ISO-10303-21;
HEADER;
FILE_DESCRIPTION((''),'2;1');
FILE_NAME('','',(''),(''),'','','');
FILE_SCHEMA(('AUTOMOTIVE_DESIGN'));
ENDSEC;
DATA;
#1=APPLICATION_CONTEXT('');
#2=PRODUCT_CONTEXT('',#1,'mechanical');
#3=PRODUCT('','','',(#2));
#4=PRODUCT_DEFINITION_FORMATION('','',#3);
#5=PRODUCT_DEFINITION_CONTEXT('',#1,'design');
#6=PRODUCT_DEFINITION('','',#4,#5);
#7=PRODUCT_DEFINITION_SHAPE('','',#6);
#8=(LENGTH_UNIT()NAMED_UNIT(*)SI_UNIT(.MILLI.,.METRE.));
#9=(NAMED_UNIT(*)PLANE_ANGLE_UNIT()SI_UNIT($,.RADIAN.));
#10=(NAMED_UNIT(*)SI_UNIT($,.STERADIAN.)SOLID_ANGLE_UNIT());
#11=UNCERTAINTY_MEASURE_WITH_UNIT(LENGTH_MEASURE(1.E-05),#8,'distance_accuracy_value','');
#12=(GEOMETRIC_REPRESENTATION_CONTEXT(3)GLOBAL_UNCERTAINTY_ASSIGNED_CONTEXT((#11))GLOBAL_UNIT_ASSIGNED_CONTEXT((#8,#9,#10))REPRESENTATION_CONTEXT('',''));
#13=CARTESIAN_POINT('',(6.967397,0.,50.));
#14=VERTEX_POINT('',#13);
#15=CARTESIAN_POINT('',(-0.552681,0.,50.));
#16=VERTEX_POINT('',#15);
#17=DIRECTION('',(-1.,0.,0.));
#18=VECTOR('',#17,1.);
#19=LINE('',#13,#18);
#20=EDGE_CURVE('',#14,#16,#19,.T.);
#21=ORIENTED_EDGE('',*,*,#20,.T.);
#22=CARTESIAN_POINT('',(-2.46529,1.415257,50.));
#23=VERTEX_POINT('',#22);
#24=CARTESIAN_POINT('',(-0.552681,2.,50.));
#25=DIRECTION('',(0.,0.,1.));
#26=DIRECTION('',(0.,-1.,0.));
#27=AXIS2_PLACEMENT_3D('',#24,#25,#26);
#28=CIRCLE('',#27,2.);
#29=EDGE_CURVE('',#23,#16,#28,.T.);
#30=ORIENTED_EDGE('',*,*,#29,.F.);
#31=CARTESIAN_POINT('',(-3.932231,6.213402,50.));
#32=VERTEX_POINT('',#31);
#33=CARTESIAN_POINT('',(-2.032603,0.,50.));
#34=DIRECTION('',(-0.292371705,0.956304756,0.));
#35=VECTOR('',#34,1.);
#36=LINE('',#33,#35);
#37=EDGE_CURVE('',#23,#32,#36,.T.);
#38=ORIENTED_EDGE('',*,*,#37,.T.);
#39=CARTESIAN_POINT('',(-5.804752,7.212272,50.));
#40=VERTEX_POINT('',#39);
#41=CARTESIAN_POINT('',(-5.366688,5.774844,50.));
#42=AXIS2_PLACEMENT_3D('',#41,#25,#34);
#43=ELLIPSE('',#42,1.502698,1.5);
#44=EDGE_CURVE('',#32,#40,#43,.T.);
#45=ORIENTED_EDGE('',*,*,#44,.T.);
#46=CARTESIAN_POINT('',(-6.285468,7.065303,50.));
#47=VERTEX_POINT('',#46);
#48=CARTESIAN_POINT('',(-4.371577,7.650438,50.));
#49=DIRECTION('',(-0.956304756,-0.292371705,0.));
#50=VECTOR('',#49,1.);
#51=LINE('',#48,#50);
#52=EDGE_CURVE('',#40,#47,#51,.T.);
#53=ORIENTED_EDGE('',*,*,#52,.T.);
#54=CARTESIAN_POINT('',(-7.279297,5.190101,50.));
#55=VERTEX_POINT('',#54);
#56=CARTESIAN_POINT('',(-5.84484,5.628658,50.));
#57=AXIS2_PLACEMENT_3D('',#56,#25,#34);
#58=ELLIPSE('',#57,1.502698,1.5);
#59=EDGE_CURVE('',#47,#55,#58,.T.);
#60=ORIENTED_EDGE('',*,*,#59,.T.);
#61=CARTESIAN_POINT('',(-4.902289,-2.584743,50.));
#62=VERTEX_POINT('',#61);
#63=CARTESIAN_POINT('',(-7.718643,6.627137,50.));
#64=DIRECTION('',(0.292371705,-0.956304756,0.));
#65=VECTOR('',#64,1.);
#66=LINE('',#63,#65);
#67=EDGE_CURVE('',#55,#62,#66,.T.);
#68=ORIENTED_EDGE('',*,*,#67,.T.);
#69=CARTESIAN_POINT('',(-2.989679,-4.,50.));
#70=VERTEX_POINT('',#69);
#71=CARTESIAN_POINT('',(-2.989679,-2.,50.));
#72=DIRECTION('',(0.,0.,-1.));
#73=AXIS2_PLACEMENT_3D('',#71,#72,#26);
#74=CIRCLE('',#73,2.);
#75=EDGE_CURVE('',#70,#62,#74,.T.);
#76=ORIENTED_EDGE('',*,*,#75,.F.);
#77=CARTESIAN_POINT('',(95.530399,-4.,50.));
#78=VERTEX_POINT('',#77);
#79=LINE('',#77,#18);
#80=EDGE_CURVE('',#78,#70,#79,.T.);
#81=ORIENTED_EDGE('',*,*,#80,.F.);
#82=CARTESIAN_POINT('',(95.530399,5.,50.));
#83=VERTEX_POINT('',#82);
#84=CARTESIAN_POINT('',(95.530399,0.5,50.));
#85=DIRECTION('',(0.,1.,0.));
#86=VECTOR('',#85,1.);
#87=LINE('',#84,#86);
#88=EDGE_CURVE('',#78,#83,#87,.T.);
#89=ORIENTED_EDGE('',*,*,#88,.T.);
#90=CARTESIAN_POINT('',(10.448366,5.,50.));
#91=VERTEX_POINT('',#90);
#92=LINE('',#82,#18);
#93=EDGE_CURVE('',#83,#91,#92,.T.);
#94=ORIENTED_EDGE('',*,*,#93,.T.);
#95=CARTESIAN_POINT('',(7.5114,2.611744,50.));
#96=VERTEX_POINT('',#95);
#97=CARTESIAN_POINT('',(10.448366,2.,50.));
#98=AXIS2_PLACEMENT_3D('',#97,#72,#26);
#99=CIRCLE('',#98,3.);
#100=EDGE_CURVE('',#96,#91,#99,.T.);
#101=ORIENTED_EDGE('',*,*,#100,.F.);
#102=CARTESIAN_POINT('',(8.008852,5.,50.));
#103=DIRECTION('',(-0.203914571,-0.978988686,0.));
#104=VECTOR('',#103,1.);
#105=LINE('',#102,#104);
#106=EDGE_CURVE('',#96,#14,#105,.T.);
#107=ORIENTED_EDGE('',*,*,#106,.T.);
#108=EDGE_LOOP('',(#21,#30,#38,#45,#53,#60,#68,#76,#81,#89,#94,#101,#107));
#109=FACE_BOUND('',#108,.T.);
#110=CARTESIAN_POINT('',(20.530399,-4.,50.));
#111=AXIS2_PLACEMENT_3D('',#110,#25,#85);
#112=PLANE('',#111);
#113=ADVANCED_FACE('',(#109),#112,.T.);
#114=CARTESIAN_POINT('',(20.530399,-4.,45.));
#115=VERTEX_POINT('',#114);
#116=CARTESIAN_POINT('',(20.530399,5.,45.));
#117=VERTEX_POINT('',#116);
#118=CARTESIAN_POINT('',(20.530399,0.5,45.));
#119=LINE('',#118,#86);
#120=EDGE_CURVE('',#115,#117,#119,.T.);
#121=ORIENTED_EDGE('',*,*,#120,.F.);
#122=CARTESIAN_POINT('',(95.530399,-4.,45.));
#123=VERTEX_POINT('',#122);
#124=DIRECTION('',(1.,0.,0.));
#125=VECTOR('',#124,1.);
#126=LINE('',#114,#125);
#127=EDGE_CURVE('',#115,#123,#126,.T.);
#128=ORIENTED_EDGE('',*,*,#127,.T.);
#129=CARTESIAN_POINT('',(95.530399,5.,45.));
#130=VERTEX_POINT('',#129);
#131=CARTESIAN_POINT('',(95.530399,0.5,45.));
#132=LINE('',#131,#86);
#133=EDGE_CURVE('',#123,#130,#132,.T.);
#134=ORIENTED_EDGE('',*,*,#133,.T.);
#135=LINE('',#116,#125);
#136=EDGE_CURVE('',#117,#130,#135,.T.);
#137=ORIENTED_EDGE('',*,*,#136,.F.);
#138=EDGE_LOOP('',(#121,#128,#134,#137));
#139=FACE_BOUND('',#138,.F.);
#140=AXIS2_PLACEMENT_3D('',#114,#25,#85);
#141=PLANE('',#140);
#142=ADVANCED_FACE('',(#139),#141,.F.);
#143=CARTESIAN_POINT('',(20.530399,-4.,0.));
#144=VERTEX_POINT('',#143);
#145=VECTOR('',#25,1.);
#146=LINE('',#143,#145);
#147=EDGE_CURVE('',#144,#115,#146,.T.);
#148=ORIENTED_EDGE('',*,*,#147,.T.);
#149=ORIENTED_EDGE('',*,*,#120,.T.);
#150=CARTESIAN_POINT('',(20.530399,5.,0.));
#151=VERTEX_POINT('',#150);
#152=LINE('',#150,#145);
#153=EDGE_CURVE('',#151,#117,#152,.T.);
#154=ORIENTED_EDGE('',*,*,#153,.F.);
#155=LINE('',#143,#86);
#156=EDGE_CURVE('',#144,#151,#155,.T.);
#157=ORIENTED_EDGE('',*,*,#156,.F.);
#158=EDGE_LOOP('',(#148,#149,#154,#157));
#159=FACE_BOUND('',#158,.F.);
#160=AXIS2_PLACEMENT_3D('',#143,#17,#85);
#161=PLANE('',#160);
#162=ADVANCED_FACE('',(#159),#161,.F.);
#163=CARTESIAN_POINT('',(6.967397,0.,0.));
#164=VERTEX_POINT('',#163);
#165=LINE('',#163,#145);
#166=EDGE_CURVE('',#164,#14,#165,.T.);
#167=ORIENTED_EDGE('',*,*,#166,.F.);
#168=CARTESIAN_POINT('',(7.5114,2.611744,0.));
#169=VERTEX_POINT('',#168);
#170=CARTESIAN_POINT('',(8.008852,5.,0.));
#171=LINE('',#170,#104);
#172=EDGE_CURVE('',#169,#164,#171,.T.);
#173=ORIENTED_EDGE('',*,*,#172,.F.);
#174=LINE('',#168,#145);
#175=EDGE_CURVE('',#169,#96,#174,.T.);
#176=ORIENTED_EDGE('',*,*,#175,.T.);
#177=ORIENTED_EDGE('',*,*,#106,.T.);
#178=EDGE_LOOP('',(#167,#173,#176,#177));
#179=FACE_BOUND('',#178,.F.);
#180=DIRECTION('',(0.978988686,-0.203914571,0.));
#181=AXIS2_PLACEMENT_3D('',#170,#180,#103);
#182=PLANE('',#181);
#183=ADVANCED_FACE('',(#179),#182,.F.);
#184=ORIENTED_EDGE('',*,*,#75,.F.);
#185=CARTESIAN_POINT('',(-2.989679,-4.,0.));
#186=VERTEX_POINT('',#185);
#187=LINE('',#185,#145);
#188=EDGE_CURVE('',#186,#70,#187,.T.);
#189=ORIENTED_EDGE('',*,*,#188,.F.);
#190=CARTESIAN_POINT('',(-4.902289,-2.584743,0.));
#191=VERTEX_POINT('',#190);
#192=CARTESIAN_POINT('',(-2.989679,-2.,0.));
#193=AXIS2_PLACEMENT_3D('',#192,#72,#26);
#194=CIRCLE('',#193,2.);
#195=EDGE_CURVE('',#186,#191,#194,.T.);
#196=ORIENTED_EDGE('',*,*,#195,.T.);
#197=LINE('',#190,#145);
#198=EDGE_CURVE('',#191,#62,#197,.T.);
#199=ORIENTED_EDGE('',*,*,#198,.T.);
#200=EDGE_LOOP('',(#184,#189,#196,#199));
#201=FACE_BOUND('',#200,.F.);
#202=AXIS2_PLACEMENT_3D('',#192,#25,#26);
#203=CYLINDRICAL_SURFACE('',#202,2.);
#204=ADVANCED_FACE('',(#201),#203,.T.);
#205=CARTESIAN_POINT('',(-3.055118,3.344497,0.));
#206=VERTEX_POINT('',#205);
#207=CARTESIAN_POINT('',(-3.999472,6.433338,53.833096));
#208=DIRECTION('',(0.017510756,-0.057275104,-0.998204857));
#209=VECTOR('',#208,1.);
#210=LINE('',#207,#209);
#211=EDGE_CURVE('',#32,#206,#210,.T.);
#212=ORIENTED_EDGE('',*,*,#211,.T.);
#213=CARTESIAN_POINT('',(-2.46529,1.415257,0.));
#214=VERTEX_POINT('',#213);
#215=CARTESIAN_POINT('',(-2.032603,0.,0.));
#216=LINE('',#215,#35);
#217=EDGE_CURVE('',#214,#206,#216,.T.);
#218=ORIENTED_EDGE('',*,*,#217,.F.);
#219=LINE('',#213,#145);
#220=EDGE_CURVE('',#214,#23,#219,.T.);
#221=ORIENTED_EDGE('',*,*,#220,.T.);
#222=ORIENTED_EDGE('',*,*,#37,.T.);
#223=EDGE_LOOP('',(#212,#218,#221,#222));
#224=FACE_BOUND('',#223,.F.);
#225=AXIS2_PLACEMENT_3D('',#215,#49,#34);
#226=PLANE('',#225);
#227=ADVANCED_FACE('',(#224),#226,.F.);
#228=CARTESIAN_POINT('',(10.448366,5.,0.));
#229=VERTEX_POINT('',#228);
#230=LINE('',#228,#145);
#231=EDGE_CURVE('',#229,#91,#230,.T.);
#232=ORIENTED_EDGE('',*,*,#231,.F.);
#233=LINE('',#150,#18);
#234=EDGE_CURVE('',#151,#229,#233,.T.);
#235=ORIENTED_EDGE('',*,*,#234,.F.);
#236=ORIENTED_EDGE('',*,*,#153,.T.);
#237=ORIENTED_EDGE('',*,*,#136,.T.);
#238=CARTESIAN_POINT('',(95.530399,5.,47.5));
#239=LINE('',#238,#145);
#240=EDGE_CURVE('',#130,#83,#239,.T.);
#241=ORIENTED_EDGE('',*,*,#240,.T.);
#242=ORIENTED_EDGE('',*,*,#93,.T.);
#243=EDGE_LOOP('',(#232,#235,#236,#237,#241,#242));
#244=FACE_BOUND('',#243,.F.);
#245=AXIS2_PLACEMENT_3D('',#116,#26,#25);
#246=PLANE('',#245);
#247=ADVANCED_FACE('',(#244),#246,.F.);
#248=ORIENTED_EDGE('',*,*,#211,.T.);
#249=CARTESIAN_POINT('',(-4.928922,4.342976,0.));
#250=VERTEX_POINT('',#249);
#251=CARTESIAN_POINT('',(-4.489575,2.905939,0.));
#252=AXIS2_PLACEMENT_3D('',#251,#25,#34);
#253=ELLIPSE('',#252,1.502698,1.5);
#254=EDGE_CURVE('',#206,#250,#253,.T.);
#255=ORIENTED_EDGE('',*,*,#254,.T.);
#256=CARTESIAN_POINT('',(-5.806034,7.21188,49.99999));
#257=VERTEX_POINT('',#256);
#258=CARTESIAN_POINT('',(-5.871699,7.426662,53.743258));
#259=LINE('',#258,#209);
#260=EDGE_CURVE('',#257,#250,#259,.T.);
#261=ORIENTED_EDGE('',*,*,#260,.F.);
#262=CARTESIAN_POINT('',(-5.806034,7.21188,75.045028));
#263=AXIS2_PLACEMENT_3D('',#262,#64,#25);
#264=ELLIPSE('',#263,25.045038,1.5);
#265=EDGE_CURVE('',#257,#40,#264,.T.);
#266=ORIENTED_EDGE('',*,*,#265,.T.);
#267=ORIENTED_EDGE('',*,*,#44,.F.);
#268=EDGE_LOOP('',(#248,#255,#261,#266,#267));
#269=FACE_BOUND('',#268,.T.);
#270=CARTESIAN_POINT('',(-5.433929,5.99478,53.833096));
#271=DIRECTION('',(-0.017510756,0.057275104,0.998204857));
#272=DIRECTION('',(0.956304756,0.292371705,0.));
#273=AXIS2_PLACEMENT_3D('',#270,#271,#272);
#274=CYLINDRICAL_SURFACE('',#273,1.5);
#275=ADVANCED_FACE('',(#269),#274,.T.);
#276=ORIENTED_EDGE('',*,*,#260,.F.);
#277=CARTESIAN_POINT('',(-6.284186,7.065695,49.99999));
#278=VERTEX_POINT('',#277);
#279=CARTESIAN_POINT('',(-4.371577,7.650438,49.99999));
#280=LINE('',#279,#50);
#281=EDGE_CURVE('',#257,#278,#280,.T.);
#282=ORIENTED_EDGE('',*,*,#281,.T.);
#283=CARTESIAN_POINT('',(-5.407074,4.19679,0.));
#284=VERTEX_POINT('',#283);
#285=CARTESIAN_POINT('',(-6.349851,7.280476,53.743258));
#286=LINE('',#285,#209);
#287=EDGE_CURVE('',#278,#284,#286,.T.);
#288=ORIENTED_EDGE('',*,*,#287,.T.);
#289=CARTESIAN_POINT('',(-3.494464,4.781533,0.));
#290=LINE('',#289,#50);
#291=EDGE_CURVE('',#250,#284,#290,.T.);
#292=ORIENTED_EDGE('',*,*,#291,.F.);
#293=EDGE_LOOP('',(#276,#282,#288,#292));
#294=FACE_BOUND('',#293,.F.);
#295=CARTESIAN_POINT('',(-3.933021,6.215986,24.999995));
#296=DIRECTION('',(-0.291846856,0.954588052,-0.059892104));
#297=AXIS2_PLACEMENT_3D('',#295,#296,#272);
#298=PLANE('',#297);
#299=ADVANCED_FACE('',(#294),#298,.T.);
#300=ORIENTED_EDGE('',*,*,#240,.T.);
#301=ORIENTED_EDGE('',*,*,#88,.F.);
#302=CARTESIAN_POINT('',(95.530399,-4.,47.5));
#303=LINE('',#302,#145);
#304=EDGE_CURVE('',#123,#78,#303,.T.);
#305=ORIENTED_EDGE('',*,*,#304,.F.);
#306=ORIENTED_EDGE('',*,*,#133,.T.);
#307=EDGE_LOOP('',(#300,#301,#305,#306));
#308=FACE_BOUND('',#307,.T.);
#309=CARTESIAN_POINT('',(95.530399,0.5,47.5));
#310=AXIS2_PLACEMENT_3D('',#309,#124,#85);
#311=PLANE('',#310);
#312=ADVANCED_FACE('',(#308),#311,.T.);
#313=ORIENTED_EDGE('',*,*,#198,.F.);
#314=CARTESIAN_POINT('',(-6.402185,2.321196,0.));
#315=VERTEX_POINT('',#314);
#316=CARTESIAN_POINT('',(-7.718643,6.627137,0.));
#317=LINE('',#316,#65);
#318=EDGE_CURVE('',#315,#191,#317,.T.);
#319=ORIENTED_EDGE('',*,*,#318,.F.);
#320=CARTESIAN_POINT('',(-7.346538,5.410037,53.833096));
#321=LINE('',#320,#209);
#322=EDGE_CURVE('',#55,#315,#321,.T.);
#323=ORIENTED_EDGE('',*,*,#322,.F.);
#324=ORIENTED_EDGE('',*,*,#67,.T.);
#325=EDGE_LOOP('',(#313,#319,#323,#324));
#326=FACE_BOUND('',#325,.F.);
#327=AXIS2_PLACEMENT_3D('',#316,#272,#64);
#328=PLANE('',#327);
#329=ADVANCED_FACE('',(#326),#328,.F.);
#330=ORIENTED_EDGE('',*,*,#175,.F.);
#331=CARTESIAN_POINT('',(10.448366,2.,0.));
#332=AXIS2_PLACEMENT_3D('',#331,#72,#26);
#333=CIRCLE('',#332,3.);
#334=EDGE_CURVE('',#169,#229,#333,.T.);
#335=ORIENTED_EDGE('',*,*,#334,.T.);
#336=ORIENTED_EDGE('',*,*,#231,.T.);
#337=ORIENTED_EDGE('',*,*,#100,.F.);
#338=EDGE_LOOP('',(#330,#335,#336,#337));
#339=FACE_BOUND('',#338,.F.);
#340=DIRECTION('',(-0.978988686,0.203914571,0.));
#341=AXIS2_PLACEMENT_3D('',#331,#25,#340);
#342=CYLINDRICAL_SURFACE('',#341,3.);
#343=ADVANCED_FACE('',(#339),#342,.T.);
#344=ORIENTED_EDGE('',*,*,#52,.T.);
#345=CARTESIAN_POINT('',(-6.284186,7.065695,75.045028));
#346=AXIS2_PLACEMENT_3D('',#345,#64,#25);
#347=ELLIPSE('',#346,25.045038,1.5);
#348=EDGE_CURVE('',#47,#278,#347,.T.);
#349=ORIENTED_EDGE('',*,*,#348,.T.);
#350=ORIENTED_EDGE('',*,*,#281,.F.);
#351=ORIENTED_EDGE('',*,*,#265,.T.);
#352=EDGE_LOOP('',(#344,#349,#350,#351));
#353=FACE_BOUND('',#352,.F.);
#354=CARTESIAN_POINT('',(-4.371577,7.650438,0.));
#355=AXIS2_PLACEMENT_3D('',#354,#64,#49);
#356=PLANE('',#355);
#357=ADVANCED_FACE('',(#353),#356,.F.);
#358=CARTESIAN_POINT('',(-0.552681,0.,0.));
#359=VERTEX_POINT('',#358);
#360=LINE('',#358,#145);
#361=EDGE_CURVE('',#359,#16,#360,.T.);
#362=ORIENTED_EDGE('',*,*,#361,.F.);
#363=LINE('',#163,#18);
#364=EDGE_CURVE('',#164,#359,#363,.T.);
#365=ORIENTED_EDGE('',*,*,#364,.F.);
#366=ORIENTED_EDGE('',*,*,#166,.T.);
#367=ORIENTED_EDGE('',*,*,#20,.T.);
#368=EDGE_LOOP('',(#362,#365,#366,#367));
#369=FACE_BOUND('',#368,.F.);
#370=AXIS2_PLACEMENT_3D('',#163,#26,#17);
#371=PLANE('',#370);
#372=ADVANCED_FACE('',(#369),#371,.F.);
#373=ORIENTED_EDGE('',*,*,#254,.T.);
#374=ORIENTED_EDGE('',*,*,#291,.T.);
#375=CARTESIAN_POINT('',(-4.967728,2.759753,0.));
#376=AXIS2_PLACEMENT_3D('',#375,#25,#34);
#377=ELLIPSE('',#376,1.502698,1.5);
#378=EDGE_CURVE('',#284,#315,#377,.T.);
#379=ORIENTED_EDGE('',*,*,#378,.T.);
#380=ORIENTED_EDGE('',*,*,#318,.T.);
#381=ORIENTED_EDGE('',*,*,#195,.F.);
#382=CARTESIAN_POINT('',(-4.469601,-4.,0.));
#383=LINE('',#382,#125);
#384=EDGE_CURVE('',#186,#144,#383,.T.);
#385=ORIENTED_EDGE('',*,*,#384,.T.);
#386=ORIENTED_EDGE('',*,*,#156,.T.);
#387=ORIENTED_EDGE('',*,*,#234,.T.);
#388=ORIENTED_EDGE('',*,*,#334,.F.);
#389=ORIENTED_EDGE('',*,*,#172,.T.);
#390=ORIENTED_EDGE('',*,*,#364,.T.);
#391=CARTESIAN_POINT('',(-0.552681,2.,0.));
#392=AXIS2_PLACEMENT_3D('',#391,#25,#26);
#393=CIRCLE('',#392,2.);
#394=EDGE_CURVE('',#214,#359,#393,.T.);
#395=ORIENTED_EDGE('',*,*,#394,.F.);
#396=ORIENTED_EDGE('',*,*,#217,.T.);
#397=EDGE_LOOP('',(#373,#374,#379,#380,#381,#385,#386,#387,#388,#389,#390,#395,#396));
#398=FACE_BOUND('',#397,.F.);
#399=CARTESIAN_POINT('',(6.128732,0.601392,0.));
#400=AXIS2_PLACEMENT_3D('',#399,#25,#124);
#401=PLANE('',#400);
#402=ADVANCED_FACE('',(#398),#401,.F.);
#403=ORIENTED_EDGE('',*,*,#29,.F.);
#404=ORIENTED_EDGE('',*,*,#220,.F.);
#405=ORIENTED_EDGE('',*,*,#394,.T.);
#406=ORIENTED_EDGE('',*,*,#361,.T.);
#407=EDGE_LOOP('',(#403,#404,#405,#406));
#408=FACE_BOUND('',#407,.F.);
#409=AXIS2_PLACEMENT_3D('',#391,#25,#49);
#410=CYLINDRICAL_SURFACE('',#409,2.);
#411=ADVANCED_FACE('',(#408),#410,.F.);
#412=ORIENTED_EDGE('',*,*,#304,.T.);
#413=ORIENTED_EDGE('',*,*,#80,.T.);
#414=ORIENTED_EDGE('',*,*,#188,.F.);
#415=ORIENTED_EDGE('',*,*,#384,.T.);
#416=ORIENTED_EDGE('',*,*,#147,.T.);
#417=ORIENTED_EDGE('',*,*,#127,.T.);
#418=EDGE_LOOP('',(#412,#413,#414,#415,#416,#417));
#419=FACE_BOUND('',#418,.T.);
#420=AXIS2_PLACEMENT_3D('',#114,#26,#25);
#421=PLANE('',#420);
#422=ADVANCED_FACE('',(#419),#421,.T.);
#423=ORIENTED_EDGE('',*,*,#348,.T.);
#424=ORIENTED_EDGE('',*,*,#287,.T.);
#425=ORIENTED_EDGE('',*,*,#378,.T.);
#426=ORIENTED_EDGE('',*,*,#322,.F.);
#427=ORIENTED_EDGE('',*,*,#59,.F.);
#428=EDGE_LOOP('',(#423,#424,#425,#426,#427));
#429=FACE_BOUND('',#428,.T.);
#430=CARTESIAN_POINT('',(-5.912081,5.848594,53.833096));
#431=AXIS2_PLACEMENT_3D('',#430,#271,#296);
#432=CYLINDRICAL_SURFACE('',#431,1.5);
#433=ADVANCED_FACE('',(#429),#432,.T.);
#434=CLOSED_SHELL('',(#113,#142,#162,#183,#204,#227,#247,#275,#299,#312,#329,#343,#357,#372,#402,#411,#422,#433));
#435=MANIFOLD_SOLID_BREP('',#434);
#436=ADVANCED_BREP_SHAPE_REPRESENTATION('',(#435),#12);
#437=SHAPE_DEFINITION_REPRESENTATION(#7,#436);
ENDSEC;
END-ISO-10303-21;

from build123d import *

# Parameters (mm, degrees)
F1_DEPTH    = 50
F2_SIZE2    = 2.99999
F2_SIZE     = 49.99999
F3_T1_DEPTH = 57.5899085645
F4_R        = 2
F5_R        = 3
F6_W        = 9
F6_H        = 5
F7_DEPTH    = 75
F8_R        = 2


# Not quite as in the source:
# - a fillet or chamfer that OpenCascade refuses, or shapes differently, is made with other operations: its cross-section is extruded or revolved along the edge and cut away or added
# - a fillet or chamfer is up to 0.001 mm smaller than in the source, because OpenCascade refuses the exact size


with BuildPart() as f1:
    # F0 (on Top) → F1 (new body)
    with BuildSketch(Plane.XY):
        Polygon((-4.3715766435, 7.6504380477), (-7.7186432894, 6.6271370812), (-4.4696014276, -4), (20.5303985724, -4), (20.5303985724, 5), (8.0088521886, 5), (6.9673969943, 0), (-2.0326030057, 0), align=None)
    extrude(amount=F1_DEPTH)

    # F2 (size 50 and 3 in the source; OpenCascade refuses exactly that, so slightly less here)
    f2_edges = [f1.edges().sort_by_distance(p)[0] for p in [
        (-6.04511, 7.138788, 0),
    ]]
    f2_side = f1.faces().sort_by_distance((-6.04511, 7.138788, 25))[0]
    chamfer(f2_edges, length=F2_SIZE, length2=F2_SIZE2, reference=f2_side)

    # F3: fillet of radius 1.5 on 2 edges, made by hand

    # F3_s2 → F3_t1 (cut)
    with BuildSketch(Plane(origin=(-0.948644568, 3.1028765694, 54.0777102773), x_dir=(0.956304756, 0.2923717047, 0), z_dir=(0.0175107565, -0.0572751036, -0.9982048567))):
        with BuildLine():
            ThreePointArc((-1.9437879213, -4.0842430614), (-2.3831277496, -5.1449032332), (-3.4437879213, -5.5842430614))
            Line((-3.4437879213, -5.5842430614), (-1.9437879213, -5.5842430614))
            Line((-1.9437879213, -5.5842430614), (-1.9437879213, -4.0842430614))
        make_face()
        with BuildLine():
            ThreePointArc((-3.9437879213, -5.5842430614), (-5.0044480931, -5.1449032332), (-5.4437879213, -4.0842430614))
            Line((-5.4437879213, -4.0842430614), (-5.4437879213, -5.5842430614))
            Line((-5.4437879213, -5.5842430614), (-3.9437879213, -5.5842430614))
        make_face()
    extrude(amount=F3_T1_DEPTH, mode=Mode.SUBTRACT)

    # F4
    f4_edges = [f1.edges().sort_by_distance(p)[0] for p in [
        (-2.032603, 0, 25),
    ]]
    fillet(f4_edges, radius=F4_R)

    # F5
    f5_edges = [f1.edges().sort_by_distance(p)[0] for p in [
        (8.008852, 5, 25),
    ]]
    fillet(f5_edges, radius=F5_R)

    # F6 (on face) → F7 (join)
    with BuildSketch(Plane.YZ.offset(20.5303985724)):
        with Locations((0.5, 47.5)):
            Rectangle(F6_W, F6_H)
    extrude(amount=F7_DEPTH)

    # F8
    f8_edges = [f1.edges().sort_by_distance(p)[0] for p in [
        (-4.469601, -4, 25),
    ]]
    fillet(f8_edges, radius=F8_R)


solid = f1.part
